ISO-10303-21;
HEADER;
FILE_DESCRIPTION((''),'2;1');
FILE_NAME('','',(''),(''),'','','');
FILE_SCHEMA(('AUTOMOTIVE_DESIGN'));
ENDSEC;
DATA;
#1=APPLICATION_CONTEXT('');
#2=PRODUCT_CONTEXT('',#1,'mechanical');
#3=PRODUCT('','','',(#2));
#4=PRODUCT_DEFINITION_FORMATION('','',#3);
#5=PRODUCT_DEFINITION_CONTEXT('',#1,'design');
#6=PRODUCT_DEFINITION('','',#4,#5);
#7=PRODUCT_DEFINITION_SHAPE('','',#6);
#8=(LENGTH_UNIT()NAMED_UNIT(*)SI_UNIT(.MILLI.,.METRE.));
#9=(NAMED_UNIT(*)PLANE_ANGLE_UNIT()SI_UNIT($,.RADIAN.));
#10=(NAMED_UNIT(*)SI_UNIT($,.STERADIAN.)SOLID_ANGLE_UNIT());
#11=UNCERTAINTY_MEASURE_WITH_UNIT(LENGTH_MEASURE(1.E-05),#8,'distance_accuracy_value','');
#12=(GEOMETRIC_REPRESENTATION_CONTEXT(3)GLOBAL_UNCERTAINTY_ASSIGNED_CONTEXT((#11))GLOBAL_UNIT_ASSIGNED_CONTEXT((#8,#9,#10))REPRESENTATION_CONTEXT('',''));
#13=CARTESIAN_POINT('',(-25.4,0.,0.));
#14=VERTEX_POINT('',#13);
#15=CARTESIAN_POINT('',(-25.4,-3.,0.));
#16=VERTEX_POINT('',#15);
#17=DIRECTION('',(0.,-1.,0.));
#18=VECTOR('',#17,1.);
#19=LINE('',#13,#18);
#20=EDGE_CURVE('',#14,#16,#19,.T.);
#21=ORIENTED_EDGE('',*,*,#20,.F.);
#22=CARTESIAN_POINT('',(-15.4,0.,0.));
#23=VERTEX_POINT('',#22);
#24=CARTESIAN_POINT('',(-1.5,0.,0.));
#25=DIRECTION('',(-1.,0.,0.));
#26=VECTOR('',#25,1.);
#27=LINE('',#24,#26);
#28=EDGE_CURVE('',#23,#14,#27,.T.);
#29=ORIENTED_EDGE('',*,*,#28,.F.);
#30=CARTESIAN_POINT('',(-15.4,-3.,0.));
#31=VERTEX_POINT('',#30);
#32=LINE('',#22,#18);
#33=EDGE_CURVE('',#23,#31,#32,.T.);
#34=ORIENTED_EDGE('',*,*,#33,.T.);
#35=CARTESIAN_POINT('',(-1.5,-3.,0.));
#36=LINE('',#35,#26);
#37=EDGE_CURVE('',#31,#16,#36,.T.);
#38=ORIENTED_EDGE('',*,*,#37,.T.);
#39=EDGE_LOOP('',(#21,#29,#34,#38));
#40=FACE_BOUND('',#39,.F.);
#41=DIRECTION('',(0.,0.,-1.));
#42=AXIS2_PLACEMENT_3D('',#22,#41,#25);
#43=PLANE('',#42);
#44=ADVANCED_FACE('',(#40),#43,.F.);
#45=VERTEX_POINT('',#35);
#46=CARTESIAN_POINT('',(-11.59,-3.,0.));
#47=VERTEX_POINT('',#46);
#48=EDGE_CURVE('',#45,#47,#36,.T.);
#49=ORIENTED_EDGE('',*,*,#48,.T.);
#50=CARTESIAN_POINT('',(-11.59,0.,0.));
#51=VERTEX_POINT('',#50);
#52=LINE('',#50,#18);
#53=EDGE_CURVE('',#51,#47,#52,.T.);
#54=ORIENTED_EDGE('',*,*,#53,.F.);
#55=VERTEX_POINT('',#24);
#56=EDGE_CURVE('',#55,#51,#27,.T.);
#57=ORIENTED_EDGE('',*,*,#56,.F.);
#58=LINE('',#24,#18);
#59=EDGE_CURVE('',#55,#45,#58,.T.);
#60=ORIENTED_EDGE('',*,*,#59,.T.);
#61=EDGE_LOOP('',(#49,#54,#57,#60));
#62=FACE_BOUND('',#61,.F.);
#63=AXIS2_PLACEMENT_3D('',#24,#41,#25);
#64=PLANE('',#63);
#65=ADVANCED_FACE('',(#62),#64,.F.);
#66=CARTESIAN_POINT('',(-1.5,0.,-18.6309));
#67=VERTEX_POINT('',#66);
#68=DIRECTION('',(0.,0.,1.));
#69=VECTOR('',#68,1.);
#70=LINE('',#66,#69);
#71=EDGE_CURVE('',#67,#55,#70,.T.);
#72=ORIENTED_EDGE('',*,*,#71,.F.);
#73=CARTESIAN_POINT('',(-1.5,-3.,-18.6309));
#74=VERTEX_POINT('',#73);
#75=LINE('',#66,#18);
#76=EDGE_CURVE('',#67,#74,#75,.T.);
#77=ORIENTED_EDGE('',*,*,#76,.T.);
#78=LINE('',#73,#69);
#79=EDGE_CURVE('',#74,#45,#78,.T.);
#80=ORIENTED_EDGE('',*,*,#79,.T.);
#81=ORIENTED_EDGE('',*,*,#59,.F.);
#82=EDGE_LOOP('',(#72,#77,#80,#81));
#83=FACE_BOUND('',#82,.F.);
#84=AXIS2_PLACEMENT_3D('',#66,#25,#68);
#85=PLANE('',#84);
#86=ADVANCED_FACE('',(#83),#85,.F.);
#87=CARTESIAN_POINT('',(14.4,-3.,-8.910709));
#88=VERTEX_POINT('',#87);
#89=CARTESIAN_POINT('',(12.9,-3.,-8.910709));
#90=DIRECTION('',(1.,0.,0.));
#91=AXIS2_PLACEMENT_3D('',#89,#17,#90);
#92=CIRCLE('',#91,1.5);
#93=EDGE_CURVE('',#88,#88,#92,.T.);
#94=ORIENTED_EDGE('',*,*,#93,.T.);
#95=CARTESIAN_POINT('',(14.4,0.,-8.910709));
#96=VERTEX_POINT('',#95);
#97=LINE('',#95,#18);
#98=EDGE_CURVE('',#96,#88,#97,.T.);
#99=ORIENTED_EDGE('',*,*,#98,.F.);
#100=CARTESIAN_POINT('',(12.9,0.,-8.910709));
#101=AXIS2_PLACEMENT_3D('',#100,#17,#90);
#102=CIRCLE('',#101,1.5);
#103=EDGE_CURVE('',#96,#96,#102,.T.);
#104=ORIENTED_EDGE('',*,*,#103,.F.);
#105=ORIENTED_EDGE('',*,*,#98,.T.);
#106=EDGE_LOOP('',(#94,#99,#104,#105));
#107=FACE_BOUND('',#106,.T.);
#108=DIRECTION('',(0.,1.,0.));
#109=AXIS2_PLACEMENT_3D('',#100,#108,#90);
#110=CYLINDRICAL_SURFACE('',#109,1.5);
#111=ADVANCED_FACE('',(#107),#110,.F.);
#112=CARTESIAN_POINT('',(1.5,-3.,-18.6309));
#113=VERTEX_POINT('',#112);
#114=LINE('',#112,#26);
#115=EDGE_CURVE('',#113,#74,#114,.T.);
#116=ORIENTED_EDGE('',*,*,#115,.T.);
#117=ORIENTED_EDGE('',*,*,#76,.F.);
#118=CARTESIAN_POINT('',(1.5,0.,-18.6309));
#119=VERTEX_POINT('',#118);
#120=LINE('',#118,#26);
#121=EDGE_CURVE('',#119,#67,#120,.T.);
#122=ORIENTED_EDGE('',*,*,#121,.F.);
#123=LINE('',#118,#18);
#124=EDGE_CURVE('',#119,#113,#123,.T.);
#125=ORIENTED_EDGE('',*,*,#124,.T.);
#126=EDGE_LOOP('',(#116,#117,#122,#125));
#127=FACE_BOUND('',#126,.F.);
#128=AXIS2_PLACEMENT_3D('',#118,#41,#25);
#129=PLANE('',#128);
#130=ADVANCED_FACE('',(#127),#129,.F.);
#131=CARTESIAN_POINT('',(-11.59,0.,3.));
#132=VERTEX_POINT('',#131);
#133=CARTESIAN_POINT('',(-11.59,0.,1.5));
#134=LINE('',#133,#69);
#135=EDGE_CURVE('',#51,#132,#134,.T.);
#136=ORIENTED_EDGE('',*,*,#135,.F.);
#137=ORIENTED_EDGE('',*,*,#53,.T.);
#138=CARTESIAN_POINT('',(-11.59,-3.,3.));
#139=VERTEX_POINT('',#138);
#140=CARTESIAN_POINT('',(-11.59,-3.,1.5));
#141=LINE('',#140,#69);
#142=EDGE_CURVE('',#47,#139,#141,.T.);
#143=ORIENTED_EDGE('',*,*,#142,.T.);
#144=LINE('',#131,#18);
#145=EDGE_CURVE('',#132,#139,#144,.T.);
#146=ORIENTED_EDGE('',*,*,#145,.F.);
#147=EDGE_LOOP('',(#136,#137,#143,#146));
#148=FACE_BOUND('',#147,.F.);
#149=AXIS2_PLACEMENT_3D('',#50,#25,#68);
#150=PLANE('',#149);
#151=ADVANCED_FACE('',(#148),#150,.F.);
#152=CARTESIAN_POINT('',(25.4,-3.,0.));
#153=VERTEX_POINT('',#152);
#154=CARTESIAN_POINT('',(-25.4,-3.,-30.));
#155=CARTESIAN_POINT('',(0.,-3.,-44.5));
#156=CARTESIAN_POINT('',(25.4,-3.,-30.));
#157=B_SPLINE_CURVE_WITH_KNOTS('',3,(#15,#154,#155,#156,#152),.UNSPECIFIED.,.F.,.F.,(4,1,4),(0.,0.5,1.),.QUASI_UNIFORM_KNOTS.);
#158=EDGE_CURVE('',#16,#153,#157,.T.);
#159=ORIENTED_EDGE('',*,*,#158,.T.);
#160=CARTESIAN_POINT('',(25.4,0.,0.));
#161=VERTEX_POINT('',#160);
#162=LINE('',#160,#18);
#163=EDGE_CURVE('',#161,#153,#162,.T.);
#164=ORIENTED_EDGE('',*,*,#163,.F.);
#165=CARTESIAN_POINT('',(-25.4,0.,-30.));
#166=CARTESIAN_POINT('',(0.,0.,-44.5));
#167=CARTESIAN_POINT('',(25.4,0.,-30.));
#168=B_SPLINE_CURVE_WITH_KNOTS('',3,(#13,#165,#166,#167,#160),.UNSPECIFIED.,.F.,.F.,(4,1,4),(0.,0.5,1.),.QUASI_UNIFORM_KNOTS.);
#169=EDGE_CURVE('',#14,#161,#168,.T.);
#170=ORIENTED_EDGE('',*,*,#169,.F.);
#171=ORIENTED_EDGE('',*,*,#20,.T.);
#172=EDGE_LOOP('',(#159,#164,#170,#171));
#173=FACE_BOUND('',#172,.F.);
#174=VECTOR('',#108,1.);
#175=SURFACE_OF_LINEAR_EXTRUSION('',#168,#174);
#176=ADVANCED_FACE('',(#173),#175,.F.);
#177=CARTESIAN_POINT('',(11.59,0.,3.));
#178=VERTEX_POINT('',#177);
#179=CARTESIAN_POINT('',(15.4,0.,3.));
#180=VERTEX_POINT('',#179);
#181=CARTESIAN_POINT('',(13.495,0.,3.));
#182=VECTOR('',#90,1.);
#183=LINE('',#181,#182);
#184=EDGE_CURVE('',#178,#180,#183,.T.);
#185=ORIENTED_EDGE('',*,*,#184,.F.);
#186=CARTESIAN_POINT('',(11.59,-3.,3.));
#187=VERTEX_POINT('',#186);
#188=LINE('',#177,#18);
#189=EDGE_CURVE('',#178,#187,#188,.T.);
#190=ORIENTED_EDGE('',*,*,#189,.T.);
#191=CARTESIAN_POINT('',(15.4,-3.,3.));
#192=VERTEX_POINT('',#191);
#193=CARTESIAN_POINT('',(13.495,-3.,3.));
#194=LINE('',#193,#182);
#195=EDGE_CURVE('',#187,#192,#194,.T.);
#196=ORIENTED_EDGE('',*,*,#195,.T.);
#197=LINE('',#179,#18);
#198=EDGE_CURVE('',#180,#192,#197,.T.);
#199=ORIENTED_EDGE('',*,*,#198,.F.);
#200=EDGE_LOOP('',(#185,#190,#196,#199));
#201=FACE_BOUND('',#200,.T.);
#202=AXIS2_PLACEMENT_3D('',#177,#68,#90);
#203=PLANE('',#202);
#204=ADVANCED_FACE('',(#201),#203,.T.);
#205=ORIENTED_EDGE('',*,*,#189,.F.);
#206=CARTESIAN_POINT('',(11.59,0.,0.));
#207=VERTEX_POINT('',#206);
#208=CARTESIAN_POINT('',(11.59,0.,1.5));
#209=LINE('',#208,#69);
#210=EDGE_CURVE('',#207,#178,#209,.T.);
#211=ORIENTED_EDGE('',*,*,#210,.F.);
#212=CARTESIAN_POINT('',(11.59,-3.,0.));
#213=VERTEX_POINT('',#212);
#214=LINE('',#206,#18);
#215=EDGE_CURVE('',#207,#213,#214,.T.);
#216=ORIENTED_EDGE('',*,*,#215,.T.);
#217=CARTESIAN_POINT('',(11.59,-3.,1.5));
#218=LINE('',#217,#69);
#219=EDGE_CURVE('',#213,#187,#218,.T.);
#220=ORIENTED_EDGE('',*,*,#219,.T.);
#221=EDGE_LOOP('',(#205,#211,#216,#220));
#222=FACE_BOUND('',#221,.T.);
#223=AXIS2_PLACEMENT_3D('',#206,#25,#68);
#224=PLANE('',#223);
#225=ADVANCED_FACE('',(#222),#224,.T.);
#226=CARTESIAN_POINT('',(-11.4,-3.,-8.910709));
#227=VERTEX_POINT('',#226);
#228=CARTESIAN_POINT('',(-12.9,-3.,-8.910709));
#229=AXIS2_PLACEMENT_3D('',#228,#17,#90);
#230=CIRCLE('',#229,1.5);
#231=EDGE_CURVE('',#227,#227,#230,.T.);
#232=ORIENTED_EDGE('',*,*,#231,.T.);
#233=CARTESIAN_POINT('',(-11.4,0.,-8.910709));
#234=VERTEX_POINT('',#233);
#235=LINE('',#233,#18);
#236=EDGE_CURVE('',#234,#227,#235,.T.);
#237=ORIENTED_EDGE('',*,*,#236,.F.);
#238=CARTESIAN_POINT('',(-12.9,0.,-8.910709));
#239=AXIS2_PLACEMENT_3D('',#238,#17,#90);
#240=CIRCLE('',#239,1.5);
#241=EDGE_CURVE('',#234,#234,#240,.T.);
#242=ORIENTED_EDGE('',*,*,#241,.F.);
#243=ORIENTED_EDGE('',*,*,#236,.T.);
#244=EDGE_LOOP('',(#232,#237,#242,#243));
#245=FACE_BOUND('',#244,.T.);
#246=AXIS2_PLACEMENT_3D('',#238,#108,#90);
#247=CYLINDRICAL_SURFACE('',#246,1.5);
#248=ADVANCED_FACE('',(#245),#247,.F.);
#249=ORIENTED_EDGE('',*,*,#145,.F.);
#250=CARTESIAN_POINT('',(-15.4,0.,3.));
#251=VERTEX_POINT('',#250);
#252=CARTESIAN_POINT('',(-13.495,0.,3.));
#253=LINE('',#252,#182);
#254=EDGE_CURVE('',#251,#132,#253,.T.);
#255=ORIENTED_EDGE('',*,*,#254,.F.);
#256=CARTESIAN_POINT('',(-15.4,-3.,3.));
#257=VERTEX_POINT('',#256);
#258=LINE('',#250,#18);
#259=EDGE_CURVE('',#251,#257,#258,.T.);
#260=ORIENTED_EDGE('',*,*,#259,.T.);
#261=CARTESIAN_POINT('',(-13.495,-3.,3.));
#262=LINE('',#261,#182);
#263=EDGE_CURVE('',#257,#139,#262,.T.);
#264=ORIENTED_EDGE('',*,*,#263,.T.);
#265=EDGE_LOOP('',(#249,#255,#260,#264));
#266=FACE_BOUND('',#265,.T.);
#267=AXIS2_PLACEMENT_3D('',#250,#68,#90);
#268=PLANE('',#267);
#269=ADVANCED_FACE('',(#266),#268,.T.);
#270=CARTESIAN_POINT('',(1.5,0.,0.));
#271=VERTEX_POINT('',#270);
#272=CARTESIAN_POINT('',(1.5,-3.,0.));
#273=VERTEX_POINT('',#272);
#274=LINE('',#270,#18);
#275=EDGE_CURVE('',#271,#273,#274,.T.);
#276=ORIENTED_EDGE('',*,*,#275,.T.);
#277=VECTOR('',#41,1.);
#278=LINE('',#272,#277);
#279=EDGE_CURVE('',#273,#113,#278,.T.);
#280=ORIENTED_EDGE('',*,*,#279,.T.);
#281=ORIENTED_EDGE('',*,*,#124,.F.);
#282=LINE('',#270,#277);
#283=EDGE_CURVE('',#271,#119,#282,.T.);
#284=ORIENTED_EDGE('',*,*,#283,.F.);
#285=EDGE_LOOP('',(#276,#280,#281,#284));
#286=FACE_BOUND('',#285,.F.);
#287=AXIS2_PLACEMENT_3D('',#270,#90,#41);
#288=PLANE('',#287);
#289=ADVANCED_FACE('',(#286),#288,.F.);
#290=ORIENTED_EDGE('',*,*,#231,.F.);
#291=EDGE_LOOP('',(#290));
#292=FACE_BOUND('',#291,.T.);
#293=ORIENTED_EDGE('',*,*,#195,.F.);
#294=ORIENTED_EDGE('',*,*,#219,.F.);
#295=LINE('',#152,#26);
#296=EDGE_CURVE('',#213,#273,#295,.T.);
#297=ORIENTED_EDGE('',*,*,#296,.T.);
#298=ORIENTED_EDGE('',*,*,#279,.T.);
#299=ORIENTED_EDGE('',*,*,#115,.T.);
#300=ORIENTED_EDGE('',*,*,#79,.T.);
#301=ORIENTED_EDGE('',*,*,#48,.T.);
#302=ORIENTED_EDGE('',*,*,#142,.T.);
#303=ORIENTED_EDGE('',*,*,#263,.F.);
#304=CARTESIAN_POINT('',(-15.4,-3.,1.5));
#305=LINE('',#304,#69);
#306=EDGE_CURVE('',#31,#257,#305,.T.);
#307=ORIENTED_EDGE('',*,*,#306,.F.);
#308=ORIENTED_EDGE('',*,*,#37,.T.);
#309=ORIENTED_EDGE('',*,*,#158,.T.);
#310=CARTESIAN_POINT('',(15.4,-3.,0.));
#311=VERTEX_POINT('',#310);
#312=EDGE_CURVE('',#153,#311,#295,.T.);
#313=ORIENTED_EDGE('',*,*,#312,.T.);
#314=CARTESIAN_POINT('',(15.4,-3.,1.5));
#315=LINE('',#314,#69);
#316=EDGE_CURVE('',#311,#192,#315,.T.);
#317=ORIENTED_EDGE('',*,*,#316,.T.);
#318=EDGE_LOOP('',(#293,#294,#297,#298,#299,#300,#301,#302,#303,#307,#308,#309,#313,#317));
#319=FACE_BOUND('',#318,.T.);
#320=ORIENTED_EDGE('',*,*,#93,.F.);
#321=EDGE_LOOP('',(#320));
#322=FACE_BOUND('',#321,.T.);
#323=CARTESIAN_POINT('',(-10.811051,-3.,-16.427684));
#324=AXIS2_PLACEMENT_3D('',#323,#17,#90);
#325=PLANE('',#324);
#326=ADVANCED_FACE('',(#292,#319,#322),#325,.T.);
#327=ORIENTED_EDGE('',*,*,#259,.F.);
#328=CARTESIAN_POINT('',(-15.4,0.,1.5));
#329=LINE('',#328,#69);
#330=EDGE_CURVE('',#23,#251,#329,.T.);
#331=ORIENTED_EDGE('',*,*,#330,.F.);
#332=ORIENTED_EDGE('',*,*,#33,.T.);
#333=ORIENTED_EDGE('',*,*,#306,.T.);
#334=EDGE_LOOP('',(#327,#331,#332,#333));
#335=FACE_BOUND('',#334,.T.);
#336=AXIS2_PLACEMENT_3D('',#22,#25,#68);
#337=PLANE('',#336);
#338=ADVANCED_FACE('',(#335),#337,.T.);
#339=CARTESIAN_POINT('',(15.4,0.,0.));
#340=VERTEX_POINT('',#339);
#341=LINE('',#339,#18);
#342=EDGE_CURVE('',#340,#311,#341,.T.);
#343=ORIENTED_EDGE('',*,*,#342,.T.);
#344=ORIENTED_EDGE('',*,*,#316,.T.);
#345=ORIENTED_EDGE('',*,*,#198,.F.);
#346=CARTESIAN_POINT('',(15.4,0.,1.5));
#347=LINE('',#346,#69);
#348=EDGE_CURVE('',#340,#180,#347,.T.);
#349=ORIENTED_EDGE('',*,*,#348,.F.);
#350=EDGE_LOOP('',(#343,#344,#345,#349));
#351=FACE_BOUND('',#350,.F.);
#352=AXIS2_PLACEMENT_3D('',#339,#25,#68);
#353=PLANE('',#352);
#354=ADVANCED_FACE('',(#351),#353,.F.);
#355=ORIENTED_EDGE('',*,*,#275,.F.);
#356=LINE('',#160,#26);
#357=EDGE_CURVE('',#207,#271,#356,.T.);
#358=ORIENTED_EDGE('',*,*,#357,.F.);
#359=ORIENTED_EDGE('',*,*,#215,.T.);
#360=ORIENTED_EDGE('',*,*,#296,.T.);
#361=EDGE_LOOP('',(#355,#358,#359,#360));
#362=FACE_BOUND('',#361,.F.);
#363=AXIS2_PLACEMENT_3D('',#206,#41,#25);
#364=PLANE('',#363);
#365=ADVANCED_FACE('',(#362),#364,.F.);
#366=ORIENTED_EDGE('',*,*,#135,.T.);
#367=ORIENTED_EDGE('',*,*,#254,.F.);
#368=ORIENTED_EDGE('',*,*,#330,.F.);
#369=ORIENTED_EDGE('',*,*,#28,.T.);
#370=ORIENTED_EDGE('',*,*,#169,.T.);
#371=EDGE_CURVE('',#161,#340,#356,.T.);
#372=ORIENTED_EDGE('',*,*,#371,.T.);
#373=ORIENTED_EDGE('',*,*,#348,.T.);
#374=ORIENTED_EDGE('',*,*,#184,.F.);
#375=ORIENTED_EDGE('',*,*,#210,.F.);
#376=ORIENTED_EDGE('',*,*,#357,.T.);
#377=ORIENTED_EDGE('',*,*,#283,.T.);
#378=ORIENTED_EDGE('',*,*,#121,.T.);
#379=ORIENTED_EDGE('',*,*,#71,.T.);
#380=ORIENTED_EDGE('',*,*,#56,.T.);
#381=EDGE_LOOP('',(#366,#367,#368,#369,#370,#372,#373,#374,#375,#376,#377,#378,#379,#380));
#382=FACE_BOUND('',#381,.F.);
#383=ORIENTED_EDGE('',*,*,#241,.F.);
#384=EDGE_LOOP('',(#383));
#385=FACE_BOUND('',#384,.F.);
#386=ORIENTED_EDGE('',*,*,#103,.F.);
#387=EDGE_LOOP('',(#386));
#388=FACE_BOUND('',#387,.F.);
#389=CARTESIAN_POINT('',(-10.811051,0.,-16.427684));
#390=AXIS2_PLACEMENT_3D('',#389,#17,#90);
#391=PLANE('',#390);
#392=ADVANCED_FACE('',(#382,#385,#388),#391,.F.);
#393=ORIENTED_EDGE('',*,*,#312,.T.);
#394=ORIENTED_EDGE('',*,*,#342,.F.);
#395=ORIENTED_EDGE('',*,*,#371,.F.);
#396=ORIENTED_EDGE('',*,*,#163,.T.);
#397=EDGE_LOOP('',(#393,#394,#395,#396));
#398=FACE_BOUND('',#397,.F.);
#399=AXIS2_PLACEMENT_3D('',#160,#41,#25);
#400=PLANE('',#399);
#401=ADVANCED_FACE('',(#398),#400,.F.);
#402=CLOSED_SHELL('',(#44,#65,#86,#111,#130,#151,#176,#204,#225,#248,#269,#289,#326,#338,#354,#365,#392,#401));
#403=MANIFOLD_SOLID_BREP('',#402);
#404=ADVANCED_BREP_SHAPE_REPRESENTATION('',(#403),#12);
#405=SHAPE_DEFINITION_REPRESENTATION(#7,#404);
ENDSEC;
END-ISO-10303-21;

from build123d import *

# Parameters (mm, degrees)
F0_R     = 1.5
F0_W     = 3.81
F0_H     = 3
F1_DEPTH = 3


# Not quite as in the source:
# - a feature names something its author has since deleted; it is built from what else it names


with BuildPart() as f1:
    # F0 (on Front) → F1 (new body)
    with BuildSketch(Plane.XZ):
        with BuildLine():
            Line((-1.5, -18.6309), (-1.5, 0))
            Line((-1.5, 0), (-7.59, 0))
            Line((-7.59, 0), (-11.59, 0))
            Line((-11.59, 0), (-15.4, 0))
            Line((-15.4, 0), (-17.05, 0))
            Line((-17.05, 0), (-25.4, 0))
            add(Edge.make_bspline(
                [(-25.4, 0), (-25.4, -30), (-12.7, -37.25), (0, -37.25)],
                knots=[0, 0, 0, 0, 0.5, 0.5, 0.5, 0.5], degree=3))
            Line((0, -37.25), (0, -18.6309))
            Line((0, -18.6309), (-1.5, -18.6309))
        make_face()
        with Locations((-12.9, -8.9107090607)):
            Circle(F0_R, mode=Mode.SUBTRACT)
        with BuildLine():
            Line((4.35, 0), (1.5, 0))
            Line((1.5, 0), (1.5, -18.6309))
            Line((1.5, -18.6309), (0, -18.6309))
            Line((0, -18.6309), (0, -37.25))
            add(Edge.make_bspline(
                [(0, -37.25), (12.7, -37.25), (25.4, -30), (25.4, 0)],
                knots=[0.5, 0.5, 0.5, 0.5, 1, 1, 1, 1], degree=3))
            Line((25.4, 0), (15.4, 0))
            Line((15.4, 0), (11.59, 0))
            Line((11.59, 0), (6.35, 0))
            Line((6.35, 0), (4.35, 0))
        make_face()
        with Locations((12.9, -8.9107090607)):
            Circle(F0_R, mode=Mode.SUBTRACT)
        with Locations((13.495, 1.5)):
            Rectangle(F0_W, F0_H)
        with Locations((-13.495, 1.5)):
            Rectangle(F0_W, F0_H)
    extrude(amount=F1_DEPTH)


solid = f1.part
